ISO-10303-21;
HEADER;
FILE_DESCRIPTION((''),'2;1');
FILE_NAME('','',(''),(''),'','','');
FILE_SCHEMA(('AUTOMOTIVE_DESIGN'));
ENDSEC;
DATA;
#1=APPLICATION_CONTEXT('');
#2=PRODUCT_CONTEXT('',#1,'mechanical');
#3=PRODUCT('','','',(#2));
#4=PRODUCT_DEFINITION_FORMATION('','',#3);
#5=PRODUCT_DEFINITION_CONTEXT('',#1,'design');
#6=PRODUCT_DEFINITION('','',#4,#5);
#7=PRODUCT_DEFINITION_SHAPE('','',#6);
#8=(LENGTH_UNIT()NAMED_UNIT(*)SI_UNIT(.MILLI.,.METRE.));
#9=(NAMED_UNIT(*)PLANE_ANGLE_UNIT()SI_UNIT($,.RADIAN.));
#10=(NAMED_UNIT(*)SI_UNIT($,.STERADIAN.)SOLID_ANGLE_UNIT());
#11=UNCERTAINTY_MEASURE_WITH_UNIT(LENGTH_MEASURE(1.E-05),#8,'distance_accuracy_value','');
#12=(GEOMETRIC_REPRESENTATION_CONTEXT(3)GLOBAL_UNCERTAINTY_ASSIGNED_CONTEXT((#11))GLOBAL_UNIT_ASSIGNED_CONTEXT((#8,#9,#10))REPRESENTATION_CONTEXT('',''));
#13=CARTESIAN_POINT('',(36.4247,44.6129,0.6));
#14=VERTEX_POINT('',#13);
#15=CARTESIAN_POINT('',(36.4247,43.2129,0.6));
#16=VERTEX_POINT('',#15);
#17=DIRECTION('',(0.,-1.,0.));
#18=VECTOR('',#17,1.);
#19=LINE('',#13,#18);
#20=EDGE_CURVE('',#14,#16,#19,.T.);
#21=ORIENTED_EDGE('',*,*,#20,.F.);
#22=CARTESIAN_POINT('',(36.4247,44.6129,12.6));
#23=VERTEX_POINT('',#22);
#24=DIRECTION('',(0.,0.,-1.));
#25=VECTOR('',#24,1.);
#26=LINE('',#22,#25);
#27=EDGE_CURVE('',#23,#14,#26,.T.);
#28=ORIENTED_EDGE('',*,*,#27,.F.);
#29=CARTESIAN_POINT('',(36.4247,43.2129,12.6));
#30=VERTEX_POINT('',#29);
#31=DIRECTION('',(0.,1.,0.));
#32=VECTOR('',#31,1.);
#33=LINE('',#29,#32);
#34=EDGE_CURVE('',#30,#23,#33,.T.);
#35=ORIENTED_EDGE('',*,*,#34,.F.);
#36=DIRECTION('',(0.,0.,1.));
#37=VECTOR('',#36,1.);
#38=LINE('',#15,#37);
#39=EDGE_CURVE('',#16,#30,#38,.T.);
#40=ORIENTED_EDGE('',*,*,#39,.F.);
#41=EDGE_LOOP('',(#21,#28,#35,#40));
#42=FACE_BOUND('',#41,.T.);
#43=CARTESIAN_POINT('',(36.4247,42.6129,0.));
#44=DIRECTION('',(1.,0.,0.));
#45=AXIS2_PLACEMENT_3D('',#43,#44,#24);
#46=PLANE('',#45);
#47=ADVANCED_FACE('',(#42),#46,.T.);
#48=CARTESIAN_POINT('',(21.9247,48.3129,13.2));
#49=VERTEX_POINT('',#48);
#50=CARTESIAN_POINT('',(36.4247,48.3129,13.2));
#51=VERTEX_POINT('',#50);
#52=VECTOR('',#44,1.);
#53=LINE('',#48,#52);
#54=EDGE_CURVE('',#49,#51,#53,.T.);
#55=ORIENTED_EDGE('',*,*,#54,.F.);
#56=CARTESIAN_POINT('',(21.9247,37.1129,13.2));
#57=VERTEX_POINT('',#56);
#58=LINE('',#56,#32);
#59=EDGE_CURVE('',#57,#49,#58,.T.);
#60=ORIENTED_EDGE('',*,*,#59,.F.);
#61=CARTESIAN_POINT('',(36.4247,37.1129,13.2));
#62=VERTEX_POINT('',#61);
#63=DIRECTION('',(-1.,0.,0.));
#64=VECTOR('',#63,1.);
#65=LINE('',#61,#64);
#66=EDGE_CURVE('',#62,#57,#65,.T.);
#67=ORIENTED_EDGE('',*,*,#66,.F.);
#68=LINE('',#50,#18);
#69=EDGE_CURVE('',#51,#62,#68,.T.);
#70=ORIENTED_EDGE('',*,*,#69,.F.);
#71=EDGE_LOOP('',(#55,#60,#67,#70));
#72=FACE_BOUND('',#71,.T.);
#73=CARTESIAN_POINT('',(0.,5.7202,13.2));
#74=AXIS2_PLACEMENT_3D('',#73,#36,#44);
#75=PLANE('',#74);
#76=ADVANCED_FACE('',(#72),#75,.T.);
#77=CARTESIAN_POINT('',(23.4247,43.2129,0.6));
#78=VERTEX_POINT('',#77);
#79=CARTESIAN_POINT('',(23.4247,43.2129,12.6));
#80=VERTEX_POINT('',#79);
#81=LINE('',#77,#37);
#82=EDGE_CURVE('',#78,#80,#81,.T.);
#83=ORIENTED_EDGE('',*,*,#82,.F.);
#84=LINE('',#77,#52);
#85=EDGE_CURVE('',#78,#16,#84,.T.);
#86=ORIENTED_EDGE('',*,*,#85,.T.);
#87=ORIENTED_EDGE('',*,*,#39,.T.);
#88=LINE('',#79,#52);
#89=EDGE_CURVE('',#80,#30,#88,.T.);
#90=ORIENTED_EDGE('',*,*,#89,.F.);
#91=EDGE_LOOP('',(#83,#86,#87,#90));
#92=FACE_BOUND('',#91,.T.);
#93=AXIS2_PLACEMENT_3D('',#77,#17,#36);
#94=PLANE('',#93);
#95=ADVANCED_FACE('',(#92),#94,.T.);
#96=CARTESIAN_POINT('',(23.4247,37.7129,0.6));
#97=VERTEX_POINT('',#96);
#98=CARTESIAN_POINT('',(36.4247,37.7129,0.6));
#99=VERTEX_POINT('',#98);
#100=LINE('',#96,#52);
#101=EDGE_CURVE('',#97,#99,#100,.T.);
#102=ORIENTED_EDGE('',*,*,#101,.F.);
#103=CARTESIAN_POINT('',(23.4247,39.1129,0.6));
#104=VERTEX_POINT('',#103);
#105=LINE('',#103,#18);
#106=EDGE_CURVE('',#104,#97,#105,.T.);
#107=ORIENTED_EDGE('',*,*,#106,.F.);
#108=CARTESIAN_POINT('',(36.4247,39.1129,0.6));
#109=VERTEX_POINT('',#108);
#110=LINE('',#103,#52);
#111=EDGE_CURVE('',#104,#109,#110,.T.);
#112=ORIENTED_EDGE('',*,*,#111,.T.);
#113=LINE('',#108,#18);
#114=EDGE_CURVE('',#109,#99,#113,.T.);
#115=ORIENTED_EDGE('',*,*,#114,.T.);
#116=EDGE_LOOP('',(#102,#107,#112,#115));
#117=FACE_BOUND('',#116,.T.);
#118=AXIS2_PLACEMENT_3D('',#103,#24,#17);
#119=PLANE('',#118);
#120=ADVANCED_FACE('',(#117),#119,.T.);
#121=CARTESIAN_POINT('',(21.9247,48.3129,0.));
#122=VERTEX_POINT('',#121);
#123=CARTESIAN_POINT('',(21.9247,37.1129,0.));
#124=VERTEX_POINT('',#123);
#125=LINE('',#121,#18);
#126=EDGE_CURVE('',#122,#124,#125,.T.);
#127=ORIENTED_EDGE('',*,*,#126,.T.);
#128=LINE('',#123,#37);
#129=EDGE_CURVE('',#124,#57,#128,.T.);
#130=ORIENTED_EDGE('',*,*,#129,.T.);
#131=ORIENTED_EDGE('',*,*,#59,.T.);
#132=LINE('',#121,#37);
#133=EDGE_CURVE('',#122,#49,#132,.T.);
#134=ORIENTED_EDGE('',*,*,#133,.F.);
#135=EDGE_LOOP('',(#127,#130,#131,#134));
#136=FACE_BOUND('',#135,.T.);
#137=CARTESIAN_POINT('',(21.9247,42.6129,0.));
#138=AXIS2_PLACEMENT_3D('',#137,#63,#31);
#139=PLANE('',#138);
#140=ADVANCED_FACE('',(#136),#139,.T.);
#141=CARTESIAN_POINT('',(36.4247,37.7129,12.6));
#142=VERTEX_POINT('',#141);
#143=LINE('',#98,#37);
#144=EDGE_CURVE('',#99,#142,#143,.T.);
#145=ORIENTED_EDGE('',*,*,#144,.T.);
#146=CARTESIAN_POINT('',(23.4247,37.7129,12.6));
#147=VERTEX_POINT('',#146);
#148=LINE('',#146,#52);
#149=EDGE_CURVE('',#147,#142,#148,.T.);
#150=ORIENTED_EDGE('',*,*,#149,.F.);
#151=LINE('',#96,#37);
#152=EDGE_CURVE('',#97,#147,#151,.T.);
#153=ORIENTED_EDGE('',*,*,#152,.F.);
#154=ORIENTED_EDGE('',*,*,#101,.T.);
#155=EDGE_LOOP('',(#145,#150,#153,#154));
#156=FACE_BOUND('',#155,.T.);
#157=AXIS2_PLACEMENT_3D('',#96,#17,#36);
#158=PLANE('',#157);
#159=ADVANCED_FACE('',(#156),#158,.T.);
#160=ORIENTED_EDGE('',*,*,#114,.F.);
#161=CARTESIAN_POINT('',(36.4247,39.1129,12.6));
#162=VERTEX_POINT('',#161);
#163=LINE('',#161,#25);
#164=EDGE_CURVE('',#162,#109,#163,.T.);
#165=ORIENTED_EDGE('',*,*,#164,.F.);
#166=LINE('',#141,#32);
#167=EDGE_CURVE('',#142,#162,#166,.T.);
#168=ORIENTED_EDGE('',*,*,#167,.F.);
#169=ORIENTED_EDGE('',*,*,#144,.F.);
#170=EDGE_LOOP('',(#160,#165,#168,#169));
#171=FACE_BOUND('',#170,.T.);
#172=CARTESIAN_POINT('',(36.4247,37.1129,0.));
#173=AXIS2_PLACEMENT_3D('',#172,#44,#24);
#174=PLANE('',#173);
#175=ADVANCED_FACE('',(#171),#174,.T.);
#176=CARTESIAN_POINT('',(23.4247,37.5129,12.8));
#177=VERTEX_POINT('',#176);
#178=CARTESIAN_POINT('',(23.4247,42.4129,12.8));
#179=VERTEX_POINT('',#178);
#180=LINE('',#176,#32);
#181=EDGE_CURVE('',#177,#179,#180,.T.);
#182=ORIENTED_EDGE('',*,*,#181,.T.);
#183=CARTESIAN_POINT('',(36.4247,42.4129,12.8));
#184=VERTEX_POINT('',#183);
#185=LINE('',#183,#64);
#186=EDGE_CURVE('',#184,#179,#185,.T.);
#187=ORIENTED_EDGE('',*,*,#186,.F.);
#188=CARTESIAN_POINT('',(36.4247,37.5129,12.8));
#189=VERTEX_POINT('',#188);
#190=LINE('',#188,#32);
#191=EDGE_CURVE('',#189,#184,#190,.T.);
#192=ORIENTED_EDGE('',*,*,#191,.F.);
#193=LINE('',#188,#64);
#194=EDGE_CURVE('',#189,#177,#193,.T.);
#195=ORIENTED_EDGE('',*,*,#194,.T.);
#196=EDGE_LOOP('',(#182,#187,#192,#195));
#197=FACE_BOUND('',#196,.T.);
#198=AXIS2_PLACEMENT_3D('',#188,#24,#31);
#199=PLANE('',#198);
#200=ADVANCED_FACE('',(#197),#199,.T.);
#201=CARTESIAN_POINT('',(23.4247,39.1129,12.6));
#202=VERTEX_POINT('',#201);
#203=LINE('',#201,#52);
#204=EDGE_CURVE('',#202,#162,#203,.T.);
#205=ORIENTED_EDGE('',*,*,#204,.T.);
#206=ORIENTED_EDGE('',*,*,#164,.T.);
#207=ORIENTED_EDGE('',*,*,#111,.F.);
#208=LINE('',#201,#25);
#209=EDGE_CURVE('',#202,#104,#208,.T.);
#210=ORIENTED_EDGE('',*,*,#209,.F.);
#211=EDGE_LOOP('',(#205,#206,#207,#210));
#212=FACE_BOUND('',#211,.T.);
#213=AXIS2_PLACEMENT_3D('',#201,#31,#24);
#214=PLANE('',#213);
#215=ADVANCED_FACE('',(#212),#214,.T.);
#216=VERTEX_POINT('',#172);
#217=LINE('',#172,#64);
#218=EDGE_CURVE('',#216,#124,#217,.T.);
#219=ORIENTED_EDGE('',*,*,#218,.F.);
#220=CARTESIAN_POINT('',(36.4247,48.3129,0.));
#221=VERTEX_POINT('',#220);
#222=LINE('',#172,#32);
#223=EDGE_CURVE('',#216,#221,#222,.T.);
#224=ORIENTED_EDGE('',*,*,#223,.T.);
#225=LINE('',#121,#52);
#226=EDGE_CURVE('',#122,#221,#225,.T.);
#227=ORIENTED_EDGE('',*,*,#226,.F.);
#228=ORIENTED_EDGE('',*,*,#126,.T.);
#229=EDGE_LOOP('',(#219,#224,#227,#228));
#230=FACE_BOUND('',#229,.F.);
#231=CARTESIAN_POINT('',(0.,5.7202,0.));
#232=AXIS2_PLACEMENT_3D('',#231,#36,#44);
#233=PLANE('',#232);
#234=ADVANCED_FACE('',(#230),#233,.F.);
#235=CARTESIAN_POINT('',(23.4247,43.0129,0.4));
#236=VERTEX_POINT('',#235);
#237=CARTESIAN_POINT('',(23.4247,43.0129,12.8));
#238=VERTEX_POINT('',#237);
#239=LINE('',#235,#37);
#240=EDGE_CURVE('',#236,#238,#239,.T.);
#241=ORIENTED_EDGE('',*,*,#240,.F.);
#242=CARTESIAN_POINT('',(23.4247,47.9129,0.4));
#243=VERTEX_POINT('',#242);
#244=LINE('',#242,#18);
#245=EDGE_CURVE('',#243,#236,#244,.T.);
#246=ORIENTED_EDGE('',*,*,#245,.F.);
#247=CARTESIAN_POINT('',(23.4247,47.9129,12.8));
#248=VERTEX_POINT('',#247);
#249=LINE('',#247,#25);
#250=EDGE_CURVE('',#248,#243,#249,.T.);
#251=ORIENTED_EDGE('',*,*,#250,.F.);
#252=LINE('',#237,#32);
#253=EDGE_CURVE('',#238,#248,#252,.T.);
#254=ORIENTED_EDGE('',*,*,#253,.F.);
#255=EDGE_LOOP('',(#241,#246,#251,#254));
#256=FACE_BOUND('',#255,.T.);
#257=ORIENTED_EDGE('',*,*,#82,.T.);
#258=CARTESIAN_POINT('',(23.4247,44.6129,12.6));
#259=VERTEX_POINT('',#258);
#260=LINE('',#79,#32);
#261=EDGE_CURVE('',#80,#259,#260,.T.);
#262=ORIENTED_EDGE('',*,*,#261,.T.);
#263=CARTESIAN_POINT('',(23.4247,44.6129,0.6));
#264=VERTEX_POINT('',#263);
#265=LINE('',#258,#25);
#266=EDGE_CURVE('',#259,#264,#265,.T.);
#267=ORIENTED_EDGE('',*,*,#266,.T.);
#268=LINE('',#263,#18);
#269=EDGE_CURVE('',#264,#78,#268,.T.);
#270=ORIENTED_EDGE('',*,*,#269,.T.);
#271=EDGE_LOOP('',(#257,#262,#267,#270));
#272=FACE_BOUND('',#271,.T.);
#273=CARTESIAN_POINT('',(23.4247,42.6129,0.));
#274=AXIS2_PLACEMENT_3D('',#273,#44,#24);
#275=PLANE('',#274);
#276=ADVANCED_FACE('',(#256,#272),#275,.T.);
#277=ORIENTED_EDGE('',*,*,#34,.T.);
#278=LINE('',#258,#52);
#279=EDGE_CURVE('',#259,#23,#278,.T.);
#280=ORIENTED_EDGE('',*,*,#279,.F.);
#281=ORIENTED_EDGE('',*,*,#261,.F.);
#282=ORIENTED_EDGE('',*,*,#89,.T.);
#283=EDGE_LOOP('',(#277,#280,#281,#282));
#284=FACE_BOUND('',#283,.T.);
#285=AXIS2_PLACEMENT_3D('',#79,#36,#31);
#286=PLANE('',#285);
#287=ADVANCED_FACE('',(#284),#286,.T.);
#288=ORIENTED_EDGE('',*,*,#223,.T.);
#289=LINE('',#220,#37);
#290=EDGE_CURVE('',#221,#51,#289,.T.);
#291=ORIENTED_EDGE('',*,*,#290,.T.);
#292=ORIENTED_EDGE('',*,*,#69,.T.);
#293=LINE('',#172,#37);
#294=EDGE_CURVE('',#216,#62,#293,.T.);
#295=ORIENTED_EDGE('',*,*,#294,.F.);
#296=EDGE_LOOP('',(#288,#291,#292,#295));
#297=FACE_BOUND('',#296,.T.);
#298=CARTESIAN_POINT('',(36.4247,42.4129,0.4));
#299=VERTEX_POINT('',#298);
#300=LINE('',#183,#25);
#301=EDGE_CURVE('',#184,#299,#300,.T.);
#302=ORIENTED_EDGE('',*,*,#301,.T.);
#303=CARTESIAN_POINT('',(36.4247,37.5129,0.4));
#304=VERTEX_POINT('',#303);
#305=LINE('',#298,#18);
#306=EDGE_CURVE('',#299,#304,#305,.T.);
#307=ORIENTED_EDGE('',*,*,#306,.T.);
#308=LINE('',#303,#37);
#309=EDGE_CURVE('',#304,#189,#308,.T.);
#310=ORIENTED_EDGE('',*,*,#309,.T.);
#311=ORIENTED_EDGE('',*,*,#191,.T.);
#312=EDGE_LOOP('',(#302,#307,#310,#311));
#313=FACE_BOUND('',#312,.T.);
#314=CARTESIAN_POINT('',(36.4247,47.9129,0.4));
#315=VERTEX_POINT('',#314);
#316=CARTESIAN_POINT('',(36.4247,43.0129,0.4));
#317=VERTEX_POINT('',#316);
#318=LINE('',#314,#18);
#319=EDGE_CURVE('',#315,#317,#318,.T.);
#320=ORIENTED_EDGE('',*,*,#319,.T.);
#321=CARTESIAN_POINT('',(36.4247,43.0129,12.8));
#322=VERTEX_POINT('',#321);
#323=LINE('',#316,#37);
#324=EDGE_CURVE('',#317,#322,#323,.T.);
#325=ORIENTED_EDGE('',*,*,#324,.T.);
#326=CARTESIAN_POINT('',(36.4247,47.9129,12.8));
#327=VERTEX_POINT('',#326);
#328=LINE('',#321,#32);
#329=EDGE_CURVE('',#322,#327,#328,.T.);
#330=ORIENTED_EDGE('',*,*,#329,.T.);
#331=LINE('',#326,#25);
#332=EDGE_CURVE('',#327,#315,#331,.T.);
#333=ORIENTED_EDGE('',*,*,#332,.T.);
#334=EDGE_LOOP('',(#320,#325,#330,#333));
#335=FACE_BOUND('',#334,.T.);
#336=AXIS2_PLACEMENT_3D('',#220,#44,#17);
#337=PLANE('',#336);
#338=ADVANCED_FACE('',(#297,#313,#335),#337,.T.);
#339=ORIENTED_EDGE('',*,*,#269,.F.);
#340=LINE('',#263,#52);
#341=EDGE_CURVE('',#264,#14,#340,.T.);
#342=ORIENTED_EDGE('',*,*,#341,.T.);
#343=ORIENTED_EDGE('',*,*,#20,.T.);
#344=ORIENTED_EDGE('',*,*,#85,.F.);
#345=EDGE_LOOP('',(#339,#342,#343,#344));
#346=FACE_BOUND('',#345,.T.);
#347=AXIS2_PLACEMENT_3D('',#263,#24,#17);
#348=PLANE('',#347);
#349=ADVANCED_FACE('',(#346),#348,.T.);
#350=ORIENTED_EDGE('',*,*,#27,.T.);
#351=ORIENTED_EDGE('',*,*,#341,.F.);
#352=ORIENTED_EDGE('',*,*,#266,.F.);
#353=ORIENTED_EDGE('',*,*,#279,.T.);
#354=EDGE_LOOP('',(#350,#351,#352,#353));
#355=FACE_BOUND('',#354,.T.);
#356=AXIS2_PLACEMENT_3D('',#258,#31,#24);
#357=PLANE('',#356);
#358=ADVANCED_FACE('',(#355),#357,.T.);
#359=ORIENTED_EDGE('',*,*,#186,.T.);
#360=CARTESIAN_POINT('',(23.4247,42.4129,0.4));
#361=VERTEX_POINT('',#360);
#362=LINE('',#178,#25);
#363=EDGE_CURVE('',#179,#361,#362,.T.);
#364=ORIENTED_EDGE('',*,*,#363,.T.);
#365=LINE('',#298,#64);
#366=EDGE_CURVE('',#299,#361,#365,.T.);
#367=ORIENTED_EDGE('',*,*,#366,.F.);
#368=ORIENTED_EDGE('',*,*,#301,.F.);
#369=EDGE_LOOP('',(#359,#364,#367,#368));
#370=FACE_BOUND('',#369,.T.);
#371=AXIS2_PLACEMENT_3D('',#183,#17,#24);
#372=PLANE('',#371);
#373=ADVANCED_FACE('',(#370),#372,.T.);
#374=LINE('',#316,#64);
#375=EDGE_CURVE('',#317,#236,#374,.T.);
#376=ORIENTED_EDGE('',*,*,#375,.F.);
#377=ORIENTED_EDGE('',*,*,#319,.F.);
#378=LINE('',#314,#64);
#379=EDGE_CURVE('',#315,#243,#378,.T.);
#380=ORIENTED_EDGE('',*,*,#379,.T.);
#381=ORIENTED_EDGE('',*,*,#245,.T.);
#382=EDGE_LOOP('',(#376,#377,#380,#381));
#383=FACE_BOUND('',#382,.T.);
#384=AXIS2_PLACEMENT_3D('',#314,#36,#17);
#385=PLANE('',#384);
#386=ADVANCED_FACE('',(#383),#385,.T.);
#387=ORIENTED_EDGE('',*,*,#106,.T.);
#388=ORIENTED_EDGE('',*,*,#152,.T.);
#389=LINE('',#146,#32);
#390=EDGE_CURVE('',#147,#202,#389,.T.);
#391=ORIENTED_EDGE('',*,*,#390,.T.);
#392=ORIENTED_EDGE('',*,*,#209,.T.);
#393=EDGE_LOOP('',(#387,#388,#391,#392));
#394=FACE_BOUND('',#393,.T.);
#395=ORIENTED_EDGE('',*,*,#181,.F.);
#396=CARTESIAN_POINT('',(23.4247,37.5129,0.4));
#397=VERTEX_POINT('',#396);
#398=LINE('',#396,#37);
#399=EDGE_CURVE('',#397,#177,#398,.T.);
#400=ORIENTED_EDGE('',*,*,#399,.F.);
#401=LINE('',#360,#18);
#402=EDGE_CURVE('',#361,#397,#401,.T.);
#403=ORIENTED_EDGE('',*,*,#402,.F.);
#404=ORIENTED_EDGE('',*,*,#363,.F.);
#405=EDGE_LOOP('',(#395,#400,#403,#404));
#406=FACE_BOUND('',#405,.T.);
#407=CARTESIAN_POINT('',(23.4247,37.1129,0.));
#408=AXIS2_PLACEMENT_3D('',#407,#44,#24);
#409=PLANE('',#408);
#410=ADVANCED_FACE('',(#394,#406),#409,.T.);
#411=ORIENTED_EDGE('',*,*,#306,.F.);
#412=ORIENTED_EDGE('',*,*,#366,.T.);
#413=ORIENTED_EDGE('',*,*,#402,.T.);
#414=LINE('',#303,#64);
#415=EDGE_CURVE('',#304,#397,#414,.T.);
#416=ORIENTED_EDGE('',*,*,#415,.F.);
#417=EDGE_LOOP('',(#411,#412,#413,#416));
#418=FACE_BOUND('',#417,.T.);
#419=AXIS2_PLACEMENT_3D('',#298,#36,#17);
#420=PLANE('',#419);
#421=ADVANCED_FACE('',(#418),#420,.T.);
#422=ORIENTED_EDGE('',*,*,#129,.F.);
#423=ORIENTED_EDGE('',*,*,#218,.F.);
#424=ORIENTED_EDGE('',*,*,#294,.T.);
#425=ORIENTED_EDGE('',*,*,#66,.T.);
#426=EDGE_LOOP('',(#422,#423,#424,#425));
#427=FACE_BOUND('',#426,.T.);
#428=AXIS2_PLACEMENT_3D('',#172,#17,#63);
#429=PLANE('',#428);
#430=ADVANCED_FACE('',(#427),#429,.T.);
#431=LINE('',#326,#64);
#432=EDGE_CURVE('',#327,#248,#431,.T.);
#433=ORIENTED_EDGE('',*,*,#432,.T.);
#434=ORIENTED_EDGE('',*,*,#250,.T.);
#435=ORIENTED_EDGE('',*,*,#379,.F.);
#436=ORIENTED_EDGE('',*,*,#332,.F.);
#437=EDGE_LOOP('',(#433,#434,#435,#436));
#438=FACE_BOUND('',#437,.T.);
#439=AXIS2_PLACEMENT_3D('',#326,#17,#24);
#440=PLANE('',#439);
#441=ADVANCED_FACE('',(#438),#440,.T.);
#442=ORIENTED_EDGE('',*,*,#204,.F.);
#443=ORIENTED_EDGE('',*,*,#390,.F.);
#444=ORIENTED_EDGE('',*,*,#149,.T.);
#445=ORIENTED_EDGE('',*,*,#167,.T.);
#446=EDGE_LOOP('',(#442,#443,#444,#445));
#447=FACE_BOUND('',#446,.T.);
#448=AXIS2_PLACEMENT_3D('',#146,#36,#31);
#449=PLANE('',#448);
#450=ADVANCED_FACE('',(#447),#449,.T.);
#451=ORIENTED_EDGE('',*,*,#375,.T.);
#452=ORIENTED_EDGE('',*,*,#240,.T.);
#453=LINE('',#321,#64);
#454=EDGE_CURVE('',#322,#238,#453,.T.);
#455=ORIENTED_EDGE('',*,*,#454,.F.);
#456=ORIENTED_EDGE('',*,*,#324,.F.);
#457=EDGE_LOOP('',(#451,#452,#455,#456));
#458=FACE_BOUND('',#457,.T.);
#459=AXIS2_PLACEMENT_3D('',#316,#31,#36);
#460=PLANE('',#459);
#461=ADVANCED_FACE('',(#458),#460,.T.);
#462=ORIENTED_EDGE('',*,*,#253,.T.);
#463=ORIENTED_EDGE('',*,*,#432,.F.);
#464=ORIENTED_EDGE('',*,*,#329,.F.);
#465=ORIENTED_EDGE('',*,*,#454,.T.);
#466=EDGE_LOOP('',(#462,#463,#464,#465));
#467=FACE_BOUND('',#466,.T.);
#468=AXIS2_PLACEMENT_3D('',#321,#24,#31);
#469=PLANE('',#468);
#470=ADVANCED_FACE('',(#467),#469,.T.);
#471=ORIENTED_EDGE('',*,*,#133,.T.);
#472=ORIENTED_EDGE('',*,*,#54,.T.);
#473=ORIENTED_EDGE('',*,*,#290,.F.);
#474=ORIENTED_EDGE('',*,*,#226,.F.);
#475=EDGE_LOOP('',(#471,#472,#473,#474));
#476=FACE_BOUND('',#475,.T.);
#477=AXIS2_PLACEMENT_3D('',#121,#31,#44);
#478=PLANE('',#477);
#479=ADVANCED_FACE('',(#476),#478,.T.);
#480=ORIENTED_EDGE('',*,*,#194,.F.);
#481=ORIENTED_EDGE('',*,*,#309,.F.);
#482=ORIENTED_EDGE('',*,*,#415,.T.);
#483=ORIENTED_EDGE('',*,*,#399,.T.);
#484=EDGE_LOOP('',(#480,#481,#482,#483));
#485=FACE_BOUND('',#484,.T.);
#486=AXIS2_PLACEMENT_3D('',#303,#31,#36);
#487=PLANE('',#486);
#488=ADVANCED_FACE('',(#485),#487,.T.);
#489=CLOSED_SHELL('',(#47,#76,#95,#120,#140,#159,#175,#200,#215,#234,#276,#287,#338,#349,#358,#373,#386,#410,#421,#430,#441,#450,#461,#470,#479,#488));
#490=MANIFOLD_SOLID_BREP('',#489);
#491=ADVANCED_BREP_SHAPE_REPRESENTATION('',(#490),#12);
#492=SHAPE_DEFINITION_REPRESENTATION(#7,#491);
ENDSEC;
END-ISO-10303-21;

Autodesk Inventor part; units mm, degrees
ref_plane "YZ Plane" through (0, 0, 0) normal (1, 0, 0) x (0, 1, 0)
ref_plane "XZ Plane" through (0, 0, 0) normal (0, 1, 0) x (-1, 0, 0)
ref_plane "Work Plane1" through (0, 0.2202, 0) normal (0, 0, 1) x (1, 0, 0)
sketch "Sketch1" plane through (0, 0.2202, 0) normal (0, 0, 1) x (1, 0, 0)
  line L0 (21.9247, 42.5927) -> (36.4247, 42.5927)
  line L1 (36.4247, 42.5927) -> (36.4247, 36.8927)
  line L2 (36.4247, 36.8927) -> (21.9247, 36.8927)
  line L3 (21.9247, 36.8927) -> (21.9247, 42.5927)
  point P0 (0, -0.2202)
  dimension "d0" = 14.5
  dimension "d2" = 5.7
extrude "Extrusion1" add sketch "Sketch1" along normal blind 13.2
sketch "Sketch2" plane through (36.4247, 37.1129, 0) normal (1, 0, 0) x (0, 0, -1)
  line L0 (0, 5.7) -> (0, 0) projected
  line L1 (0, 5.7) -> (-13.2, 5.7) projected
  line L2 (-13.2, 0) -> (-13.2, 5.7) projected
  line L3 (0, 0) -> (-13.2, 0) projected
  line L4 (-12.8, 5.3) -> (-0.4, 5.3)
  line L5 (-0.4, 5.3) -> (-0.4, 0.4)
  line L6 (-0.4, 0.4) -> (-12.8, 0.4)
  line L7 (-12.8, 0.4) -> (-12.8, 5.3)
  point P0 (0, -37.1129)
  dimension "d5" = 0.4
extrude "Extrusion2" cut sketch "Sketch2" against normal blind 13 contours L4 L5 L6 L7
sketch "Sketch3" plane through (23.4247, 37.1129, 0) normal (1, 0, 0) x (0, 0, -1)
  line L0 (-12.8, 0.4) -> (-12.8, 5.3) projected
  line L1 (-0.4, 0.4) -> (-12.8, 0.4) projected
  line L2 (-0.4, 5.3) -> (-0.4, 0.4) projected
  line L3 (-12.6, 2) -> (-0.6, 2)
  line L4 (-0.6, 2) -> (-0.6, 0.6)
  line L5 (-0.6, 0.6) -> (-12.6, 0.6)
  line L6 (-12.6, 0.6) -> (-12.6, 2)
  point P0 (0, -37.1129)
  dimension "d8" = 0.2
  dimension "d9" = 0.2
  dimension "d10" = 0.2
  dimension "d11" = 1.4
extrude "Extrusion3" add sketch "Sketch3" along normal blind 13
pattern_linear "Rectangular Pattern1" count 2 spacing 5.5 along (0, 1, 0) of "Extrusion1", "Extrusion3", "Extrusion2"
properties part number "nanopc_t4_usb"
